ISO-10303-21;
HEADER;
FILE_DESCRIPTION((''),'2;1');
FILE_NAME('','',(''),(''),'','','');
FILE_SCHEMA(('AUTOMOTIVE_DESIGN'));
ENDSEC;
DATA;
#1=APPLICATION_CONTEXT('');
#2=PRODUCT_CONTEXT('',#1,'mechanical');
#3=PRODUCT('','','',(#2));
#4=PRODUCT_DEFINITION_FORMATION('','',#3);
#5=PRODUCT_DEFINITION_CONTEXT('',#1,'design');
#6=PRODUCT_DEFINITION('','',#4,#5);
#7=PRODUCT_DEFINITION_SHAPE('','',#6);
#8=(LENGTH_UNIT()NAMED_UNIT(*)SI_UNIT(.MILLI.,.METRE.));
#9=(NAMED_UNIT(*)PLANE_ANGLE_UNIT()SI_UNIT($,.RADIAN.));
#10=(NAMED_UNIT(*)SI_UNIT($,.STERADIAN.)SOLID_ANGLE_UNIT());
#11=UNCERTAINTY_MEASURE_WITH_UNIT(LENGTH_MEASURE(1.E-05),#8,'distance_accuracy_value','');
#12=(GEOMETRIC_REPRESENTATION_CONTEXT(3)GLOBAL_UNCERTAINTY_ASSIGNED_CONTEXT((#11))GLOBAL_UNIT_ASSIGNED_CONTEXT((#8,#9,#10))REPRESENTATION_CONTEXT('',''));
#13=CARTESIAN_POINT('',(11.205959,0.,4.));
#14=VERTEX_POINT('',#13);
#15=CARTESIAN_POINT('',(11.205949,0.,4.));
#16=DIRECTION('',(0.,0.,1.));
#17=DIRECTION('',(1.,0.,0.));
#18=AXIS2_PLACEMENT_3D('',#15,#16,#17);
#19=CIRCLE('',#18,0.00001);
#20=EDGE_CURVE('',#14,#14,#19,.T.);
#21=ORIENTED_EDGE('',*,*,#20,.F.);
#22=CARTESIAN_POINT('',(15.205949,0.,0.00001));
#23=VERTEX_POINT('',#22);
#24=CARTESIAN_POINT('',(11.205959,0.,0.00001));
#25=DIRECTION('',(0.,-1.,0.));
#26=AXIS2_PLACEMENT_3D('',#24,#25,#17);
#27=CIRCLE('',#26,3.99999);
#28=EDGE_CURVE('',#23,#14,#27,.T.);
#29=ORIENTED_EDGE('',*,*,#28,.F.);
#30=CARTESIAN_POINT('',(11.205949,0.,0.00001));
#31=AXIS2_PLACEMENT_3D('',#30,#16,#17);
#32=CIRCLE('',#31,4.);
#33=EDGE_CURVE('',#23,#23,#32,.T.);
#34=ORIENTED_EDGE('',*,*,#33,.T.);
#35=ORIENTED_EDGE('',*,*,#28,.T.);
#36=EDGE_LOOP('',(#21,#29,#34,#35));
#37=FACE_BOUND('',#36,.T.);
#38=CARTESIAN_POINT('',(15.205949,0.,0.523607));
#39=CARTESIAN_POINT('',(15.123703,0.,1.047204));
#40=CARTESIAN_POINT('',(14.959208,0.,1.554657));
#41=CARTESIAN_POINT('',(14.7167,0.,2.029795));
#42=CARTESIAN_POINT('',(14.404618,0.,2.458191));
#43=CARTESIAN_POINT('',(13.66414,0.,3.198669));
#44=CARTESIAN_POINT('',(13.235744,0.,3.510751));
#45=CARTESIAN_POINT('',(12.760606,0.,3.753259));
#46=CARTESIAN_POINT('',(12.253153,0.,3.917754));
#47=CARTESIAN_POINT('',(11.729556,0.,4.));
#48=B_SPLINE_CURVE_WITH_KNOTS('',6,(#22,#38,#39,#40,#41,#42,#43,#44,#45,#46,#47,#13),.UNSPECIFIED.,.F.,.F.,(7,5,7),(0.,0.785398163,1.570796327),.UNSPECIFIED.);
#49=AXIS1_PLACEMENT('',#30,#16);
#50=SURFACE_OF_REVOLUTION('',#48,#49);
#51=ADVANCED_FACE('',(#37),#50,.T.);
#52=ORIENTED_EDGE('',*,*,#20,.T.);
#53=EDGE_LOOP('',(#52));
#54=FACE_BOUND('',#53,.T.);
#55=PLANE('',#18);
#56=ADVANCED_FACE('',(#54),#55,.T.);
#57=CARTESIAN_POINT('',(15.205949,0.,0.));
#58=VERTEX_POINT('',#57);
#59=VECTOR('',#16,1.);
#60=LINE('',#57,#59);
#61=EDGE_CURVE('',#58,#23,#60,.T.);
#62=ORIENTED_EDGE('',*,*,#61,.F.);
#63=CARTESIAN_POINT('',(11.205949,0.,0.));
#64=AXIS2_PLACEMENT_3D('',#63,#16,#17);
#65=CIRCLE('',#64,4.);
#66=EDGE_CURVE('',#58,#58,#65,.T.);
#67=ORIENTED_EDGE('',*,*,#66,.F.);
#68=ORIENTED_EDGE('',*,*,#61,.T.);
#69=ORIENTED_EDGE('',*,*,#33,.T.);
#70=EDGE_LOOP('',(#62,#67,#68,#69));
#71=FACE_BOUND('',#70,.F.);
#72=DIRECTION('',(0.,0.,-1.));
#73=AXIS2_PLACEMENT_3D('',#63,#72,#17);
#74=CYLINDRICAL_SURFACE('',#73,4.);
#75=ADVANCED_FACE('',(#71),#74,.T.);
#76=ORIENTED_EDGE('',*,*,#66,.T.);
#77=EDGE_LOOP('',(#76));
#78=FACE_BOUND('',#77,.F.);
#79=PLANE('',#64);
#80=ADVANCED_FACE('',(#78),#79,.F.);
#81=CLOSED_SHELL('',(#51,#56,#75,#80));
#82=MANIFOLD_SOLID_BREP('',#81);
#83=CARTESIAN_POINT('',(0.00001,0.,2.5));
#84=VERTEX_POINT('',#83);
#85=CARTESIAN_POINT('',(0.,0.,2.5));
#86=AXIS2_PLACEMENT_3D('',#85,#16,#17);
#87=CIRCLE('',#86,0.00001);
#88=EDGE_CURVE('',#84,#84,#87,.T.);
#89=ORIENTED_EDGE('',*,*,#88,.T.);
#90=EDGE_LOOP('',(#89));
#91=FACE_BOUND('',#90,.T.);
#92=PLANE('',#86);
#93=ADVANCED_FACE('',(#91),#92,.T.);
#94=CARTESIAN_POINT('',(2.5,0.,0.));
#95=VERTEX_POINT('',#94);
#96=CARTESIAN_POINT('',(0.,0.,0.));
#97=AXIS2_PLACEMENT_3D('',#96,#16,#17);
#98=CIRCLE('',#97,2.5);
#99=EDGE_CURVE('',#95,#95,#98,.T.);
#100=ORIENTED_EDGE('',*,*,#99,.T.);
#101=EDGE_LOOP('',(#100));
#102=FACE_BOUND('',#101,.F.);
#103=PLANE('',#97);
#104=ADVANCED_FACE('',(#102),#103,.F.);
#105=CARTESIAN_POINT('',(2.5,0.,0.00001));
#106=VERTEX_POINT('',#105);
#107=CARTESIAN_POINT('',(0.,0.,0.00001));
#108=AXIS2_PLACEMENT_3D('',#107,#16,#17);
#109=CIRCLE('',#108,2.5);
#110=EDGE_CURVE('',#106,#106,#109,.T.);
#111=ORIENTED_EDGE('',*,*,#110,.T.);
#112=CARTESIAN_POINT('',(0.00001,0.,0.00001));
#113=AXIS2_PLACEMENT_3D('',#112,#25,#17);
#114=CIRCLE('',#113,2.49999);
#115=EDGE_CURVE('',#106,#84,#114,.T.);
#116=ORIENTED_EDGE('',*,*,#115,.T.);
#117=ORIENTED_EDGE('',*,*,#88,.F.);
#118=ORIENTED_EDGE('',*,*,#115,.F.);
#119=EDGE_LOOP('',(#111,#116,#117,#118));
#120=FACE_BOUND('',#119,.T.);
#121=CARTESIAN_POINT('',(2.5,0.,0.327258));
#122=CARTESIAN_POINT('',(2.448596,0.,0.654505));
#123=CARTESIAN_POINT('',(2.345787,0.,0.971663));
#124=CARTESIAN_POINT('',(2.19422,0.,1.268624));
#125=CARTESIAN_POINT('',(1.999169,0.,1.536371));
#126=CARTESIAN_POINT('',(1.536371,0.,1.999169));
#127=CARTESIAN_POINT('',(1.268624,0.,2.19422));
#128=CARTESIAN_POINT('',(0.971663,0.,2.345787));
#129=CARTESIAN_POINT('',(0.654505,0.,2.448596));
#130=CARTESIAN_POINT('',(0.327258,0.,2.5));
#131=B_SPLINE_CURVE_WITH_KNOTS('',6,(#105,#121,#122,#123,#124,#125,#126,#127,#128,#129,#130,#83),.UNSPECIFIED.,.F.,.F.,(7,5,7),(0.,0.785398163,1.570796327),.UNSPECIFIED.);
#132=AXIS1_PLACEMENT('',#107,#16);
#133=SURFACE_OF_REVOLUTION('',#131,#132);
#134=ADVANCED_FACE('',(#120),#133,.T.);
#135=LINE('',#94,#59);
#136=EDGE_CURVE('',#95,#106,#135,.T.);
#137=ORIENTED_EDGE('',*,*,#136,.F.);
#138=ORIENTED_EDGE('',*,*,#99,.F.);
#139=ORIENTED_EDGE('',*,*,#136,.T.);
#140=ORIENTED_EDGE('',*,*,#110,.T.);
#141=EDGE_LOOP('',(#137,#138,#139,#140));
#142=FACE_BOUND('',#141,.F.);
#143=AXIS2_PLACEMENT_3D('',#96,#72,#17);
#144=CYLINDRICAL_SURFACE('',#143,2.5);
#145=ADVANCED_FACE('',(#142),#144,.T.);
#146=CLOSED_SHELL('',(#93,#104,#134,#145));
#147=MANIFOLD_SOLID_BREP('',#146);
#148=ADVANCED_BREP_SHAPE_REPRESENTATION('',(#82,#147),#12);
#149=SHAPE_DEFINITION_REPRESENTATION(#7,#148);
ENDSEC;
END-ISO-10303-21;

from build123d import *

# Parameters (mm, degrees)
F0_R     = 2.5
F1_DEPTH = 2.5
F0_R_2   = 4
F2_DEPTH = 4
F3_R     = 2.49999
F4_R     = 3.99999


# Not quite as in the source:
# - a fillet or chamfer is up to 0.001 mm smaller than in the source, because OpenCascade refuses the exact size


with BuildPart() as f1:
    # F0 (on Top) → F1 (new body)
    with BuildSketch(Plane.XY):
        Circle(F0_R)
    extrude(amount=F1_DEPTH)

    # F3 (radius 2.5 in the source; OpenCascade refuses exactly that, so slightly less here)
    f3_edges = [f1.edges().sort_by_distance(p)[0] for p in [
        (-2.5, 0, 2.5),
    ]]
    fillet(f3_edges, radius=F3_R)


with BuildPart() as f2:
    # F0 (on Top) → F2 (new body)
    with BuildSketch(Plane.XY):
        with Locations((11.2059488893, 0)):
            Circle(F0_R_2)
    extrude(amount=F2_DEPTH)

    # F4 (radius 4 in the source; OpenCascade refuses exactly that, so slightly less here)
    f4_edges = [f2.edges().sort_by_distance(p)[0] for p in [
        (7.205949, 0, 4),
    ]]
    fillet(f4_edges, radius=F4_R)


solid = Compound([f1.part, f2.part])
